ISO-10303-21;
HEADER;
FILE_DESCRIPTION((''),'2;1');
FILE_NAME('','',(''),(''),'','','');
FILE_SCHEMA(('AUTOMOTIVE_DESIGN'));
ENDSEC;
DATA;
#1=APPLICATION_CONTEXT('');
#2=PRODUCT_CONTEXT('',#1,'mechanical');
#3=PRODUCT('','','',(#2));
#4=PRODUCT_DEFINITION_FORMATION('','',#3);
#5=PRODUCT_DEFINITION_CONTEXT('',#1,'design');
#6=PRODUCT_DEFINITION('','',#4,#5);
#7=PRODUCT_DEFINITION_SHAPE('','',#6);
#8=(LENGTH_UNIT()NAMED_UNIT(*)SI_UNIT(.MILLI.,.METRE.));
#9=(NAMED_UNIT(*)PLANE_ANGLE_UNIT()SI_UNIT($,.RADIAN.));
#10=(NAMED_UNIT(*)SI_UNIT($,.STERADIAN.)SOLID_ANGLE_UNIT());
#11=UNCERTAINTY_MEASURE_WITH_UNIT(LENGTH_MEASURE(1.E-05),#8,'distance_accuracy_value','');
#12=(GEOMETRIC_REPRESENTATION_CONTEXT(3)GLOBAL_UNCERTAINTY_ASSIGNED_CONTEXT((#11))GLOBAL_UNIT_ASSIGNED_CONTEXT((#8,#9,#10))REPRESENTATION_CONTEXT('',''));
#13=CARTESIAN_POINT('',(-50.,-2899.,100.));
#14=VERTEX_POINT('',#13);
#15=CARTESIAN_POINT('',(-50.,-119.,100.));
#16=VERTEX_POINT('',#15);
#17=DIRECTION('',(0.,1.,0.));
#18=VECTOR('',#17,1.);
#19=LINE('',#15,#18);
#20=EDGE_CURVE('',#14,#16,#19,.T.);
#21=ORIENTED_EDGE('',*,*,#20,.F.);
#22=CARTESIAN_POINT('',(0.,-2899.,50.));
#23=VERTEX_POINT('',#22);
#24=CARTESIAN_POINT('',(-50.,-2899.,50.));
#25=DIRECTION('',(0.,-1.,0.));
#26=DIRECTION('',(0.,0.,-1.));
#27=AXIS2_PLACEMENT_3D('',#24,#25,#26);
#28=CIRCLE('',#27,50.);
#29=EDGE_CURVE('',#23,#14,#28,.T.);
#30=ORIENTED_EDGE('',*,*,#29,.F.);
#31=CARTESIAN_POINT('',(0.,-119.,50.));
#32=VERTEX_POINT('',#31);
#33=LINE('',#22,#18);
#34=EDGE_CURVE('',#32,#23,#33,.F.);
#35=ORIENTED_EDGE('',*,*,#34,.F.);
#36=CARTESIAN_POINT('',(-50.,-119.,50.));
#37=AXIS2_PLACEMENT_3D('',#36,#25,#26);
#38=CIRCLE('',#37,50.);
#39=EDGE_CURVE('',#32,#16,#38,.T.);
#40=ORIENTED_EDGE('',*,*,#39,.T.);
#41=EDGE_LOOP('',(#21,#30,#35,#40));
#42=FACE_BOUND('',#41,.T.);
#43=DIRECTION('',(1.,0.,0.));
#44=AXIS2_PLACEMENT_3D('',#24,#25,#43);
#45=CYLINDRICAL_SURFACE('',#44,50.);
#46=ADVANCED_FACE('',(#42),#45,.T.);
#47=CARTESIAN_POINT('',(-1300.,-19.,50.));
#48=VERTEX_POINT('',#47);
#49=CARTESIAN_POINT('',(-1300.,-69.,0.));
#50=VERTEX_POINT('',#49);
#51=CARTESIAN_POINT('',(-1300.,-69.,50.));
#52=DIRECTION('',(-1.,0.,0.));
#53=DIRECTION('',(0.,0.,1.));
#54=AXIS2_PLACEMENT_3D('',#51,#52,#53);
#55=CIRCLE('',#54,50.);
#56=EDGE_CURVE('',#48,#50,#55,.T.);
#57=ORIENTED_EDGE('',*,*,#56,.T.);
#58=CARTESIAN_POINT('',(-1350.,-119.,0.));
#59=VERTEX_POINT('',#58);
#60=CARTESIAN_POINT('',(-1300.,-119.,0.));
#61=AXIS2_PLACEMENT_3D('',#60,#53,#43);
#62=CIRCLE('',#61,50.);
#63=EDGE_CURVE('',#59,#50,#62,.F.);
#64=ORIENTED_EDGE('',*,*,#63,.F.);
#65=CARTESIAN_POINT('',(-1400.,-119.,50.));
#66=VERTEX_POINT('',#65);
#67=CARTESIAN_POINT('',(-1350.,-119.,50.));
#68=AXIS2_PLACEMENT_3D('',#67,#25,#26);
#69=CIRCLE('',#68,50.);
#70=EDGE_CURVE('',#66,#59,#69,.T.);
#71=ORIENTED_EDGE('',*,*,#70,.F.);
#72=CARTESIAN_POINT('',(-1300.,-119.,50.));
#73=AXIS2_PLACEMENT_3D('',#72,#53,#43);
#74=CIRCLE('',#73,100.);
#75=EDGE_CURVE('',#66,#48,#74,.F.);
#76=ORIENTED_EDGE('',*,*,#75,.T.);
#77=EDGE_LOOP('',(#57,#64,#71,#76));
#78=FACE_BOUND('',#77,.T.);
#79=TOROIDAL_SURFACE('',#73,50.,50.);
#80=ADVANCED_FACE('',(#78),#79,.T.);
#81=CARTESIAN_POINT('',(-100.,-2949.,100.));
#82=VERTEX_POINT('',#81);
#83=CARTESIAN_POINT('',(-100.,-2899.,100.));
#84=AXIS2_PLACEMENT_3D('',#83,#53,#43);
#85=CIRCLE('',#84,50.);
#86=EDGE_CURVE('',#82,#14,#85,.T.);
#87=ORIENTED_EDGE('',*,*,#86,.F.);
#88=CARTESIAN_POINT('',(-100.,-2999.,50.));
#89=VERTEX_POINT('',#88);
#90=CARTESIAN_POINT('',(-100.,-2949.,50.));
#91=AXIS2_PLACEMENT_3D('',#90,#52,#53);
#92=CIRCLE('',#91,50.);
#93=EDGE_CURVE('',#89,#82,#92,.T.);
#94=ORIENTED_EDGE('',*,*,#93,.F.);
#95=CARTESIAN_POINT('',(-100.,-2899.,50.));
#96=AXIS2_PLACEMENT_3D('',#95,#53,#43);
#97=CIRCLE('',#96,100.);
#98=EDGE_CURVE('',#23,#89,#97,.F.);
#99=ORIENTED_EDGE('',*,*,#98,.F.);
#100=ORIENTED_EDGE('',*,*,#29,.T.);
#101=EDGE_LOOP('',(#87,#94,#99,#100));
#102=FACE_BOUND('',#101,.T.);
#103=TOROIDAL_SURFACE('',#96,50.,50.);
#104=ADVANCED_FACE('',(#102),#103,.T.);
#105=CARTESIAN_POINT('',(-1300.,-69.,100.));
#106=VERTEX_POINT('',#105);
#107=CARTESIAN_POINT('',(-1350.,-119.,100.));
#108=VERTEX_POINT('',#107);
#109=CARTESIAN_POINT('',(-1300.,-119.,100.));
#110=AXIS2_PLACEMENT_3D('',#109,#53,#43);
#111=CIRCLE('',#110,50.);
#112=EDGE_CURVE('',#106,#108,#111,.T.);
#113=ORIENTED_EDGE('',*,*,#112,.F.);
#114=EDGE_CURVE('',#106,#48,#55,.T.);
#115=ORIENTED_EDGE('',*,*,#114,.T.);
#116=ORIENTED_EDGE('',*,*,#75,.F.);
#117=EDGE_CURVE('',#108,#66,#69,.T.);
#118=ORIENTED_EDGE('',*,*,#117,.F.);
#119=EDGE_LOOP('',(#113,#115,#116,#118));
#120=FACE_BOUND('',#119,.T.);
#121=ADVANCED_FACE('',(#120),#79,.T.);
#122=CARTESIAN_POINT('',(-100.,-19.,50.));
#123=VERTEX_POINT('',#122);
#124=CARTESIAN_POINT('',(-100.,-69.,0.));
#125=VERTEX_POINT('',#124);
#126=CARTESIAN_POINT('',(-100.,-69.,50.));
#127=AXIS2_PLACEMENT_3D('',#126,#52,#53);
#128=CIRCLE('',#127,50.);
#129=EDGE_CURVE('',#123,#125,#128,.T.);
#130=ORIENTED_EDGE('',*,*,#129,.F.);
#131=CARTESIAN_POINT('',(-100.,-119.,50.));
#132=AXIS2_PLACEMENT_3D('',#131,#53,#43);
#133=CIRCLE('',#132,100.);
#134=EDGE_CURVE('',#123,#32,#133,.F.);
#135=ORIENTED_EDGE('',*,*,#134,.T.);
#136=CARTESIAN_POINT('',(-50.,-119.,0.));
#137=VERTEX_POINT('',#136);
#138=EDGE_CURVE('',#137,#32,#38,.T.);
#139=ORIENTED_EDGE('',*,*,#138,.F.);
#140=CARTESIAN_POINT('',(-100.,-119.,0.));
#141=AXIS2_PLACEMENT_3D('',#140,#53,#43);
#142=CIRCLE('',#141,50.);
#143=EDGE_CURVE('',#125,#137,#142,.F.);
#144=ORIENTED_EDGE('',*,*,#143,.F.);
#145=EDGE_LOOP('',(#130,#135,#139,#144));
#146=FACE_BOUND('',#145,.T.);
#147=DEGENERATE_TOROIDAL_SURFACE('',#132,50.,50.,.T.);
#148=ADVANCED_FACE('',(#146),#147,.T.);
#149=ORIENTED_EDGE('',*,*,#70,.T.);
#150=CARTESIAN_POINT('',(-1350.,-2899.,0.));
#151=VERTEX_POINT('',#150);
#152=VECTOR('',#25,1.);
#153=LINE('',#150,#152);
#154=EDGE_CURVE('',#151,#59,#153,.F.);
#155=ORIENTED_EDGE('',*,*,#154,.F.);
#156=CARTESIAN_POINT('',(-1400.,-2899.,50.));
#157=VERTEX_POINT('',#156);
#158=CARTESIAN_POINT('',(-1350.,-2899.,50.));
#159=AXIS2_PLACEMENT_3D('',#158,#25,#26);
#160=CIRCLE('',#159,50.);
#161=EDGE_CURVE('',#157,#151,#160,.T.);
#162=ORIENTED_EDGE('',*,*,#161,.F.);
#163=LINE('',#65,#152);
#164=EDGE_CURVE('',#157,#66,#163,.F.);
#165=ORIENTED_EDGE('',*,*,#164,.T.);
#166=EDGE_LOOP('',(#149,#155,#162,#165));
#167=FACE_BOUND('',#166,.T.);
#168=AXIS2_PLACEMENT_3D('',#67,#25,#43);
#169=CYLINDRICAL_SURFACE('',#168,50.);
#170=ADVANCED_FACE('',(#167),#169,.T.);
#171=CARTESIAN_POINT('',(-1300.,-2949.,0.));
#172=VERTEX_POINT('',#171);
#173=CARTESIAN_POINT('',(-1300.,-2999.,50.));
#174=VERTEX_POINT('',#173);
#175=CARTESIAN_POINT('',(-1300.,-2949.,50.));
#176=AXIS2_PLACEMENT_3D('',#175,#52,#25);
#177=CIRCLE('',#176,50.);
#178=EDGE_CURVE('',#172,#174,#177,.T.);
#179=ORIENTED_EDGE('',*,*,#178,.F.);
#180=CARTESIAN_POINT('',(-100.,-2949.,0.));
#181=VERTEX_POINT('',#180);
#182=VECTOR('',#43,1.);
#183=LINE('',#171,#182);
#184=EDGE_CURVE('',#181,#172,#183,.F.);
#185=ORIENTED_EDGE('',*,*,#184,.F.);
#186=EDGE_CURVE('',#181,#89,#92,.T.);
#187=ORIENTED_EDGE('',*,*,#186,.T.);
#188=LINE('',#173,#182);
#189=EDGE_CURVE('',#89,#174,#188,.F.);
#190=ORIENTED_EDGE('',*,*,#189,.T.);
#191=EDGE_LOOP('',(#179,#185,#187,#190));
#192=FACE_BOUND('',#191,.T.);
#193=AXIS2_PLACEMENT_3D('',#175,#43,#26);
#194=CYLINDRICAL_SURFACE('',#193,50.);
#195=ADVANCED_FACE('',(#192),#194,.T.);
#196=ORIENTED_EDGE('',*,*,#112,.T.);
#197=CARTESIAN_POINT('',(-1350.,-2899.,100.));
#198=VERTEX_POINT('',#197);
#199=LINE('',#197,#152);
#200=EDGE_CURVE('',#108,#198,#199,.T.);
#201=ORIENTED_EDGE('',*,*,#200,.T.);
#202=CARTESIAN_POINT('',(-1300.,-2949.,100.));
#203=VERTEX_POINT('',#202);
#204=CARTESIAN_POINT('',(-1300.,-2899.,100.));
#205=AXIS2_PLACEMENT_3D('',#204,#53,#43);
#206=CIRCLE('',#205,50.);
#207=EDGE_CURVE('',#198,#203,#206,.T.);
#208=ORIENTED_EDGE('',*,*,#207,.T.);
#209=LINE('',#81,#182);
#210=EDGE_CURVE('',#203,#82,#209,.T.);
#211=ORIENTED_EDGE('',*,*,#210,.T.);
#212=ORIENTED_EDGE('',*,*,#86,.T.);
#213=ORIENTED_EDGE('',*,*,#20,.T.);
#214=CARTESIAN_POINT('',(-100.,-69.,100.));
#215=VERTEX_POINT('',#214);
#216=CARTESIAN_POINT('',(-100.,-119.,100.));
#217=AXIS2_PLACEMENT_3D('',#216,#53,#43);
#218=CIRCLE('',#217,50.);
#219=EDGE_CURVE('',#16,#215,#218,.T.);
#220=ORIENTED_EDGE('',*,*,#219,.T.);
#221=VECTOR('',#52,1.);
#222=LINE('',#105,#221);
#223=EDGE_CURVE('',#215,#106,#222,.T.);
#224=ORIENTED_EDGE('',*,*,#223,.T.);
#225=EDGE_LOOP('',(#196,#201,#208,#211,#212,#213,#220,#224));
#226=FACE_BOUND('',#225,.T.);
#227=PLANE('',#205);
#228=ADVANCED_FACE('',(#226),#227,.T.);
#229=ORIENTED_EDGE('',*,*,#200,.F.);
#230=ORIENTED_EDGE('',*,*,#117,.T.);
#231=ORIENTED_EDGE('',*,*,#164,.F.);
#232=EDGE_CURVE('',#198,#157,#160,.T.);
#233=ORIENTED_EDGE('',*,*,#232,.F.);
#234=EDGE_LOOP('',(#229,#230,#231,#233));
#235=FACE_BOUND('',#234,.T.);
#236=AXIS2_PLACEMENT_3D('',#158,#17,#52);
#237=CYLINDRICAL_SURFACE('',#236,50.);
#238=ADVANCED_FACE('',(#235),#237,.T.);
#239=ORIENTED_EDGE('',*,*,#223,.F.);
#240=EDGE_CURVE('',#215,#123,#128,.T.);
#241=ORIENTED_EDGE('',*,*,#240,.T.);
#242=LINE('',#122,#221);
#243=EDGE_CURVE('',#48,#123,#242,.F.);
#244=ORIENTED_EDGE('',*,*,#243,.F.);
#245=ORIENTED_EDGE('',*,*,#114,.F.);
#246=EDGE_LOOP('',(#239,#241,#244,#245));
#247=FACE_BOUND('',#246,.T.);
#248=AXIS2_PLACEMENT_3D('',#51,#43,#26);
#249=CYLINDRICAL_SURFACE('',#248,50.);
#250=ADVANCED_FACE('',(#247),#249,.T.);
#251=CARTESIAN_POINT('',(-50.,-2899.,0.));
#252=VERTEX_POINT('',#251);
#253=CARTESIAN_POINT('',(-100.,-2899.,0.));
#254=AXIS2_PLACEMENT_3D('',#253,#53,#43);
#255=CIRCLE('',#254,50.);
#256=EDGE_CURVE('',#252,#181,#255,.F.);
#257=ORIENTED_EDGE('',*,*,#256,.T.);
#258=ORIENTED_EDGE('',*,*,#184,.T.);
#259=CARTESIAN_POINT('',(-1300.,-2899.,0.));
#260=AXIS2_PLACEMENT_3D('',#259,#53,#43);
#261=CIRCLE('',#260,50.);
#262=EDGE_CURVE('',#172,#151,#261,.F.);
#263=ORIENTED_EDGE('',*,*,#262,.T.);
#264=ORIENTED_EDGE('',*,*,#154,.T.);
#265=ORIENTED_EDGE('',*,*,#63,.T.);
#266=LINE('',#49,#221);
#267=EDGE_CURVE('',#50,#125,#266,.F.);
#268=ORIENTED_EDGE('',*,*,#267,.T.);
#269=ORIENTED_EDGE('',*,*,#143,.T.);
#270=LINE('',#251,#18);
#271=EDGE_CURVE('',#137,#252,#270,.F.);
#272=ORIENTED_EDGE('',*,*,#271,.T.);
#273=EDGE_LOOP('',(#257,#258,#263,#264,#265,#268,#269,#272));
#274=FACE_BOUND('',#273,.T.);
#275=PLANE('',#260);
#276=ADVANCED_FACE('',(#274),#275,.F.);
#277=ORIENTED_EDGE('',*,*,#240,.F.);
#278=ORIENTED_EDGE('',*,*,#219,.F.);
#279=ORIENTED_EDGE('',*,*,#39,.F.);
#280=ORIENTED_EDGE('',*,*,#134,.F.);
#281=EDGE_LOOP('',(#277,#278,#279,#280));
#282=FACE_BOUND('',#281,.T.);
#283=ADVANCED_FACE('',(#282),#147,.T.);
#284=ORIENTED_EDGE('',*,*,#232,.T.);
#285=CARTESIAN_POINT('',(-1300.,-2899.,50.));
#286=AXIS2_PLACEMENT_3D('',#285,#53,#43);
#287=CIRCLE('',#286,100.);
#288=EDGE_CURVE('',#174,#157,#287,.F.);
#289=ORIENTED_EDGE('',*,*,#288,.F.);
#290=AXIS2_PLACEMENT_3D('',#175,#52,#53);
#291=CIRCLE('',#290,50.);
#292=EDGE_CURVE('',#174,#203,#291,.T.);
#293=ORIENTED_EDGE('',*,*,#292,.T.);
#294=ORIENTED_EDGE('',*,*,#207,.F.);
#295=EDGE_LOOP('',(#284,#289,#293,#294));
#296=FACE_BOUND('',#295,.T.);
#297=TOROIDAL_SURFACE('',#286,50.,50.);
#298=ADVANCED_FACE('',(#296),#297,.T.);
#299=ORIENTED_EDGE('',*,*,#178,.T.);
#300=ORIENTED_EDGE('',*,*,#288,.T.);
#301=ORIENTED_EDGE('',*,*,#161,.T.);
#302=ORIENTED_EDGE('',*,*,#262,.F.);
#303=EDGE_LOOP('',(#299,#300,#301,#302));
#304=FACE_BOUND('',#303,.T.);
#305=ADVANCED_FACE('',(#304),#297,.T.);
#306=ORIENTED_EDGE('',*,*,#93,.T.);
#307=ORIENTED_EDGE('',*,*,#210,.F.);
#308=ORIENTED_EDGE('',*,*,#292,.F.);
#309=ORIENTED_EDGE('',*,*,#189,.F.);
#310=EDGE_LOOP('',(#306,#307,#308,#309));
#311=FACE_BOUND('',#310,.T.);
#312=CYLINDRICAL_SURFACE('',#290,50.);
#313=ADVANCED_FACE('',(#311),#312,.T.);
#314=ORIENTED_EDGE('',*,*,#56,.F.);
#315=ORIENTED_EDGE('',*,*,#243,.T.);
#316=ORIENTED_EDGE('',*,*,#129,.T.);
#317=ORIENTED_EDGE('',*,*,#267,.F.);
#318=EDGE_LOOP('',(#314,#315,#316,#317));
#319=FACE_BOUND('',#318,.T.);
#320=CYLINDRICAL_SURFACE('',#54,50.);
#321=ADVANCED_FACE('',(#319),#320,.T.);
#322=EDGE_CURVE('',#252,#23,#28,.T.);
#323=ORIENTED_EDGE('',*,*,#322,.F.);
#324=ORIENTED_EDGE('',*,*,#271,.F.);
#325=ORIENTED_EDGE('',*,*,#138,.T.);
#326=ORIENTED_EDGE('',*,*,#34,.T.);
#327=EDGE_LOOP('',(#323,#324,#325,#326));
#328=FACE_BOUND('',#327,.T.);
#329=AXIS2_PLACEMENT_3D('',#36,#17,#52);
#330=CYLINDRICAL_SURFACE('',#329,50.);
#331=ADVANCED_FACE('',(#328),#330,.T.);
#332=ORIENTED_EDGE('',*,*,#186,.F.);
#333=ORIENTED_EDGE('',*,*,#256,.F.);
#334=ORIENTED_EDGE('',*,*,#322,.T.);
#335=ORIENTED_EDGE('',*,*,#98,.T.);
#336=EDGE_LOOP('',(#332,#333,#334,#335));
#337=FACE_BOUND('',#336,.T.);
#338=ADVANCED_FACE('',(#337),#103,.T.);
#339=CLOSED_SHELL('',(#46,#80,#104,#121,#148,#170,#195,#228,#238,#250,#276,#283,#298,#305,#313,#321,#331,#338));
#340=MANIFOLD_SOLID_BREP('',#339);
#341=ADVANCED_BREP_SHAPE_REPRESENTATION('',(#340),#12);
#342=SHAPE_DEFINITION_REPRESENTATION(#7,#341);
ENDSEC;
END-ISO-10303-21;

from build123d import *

# Parameters (mm, degrees)
BOSS_EXTRUDE1_DEPTH = 100
FILLET1_R           = 50


with BuildPart() as part:
    # Sketch1 → Boss-Extrude1 (new body)
    with BuildSketch(Plane.XY):
        with BuildLine():
            Line((-1300, -19), (-100, -19))
            ThreePointArc((-100, -19), (-29.289321881, -48.289321881), (0, -119))
            Line((0, -119), (0, -2899))
            ThreePointArc((0, -2899), (-29.289321881, -2969.710678119), (-100, -2999))
            Line((-100, -2999), (-1300, -2999))
            ThreePointArc((-1300, -2999), (-1370.710678119, -2969.710678119), (-1400, -2899))
            Line((-1400, -2899), (-1400, -119))
            ThreePointArc((-1400, -119), (-1370.710678119, -48.289321881), (-1300, -19))
        make_face()
    extrude(amount=BOSS_EXTRUDE1_DEPTH)

    # Fillet1
    fillet1_edges = [part.edges().sort_by_distance(p)[0] for p in [
        (-1370.710678119, -2969.710678119, 0),
        (-700, -2999, 0),
        (-29.289321881, -2969.710678119, 0),
        (0, -1509, 0),
        (-29.289321881, -48.289321881, 0),
        (-700, -19, 0),
        (-1370.710678119, -48.289321881, 0),
        (-1400, -1509, 0),
        (-1370.710678119, -2969.710678119, 100),
        (-700, -2999, 100),
        (-29.289321881, -2969.710678119, 100),
        (0, -1509, 100),
        (-29.289321881, -48.289321881, 100),
        (-700, -19, 100),
        (-1370.710678119, -48.289321881, 100),
        (-1400, -1509, 100),
    ]]
    fillet(fillet1_edges, radius=FILLET1_R - 0.0001)  # a hair under: the kernel refuses the full size


solid = part.part
